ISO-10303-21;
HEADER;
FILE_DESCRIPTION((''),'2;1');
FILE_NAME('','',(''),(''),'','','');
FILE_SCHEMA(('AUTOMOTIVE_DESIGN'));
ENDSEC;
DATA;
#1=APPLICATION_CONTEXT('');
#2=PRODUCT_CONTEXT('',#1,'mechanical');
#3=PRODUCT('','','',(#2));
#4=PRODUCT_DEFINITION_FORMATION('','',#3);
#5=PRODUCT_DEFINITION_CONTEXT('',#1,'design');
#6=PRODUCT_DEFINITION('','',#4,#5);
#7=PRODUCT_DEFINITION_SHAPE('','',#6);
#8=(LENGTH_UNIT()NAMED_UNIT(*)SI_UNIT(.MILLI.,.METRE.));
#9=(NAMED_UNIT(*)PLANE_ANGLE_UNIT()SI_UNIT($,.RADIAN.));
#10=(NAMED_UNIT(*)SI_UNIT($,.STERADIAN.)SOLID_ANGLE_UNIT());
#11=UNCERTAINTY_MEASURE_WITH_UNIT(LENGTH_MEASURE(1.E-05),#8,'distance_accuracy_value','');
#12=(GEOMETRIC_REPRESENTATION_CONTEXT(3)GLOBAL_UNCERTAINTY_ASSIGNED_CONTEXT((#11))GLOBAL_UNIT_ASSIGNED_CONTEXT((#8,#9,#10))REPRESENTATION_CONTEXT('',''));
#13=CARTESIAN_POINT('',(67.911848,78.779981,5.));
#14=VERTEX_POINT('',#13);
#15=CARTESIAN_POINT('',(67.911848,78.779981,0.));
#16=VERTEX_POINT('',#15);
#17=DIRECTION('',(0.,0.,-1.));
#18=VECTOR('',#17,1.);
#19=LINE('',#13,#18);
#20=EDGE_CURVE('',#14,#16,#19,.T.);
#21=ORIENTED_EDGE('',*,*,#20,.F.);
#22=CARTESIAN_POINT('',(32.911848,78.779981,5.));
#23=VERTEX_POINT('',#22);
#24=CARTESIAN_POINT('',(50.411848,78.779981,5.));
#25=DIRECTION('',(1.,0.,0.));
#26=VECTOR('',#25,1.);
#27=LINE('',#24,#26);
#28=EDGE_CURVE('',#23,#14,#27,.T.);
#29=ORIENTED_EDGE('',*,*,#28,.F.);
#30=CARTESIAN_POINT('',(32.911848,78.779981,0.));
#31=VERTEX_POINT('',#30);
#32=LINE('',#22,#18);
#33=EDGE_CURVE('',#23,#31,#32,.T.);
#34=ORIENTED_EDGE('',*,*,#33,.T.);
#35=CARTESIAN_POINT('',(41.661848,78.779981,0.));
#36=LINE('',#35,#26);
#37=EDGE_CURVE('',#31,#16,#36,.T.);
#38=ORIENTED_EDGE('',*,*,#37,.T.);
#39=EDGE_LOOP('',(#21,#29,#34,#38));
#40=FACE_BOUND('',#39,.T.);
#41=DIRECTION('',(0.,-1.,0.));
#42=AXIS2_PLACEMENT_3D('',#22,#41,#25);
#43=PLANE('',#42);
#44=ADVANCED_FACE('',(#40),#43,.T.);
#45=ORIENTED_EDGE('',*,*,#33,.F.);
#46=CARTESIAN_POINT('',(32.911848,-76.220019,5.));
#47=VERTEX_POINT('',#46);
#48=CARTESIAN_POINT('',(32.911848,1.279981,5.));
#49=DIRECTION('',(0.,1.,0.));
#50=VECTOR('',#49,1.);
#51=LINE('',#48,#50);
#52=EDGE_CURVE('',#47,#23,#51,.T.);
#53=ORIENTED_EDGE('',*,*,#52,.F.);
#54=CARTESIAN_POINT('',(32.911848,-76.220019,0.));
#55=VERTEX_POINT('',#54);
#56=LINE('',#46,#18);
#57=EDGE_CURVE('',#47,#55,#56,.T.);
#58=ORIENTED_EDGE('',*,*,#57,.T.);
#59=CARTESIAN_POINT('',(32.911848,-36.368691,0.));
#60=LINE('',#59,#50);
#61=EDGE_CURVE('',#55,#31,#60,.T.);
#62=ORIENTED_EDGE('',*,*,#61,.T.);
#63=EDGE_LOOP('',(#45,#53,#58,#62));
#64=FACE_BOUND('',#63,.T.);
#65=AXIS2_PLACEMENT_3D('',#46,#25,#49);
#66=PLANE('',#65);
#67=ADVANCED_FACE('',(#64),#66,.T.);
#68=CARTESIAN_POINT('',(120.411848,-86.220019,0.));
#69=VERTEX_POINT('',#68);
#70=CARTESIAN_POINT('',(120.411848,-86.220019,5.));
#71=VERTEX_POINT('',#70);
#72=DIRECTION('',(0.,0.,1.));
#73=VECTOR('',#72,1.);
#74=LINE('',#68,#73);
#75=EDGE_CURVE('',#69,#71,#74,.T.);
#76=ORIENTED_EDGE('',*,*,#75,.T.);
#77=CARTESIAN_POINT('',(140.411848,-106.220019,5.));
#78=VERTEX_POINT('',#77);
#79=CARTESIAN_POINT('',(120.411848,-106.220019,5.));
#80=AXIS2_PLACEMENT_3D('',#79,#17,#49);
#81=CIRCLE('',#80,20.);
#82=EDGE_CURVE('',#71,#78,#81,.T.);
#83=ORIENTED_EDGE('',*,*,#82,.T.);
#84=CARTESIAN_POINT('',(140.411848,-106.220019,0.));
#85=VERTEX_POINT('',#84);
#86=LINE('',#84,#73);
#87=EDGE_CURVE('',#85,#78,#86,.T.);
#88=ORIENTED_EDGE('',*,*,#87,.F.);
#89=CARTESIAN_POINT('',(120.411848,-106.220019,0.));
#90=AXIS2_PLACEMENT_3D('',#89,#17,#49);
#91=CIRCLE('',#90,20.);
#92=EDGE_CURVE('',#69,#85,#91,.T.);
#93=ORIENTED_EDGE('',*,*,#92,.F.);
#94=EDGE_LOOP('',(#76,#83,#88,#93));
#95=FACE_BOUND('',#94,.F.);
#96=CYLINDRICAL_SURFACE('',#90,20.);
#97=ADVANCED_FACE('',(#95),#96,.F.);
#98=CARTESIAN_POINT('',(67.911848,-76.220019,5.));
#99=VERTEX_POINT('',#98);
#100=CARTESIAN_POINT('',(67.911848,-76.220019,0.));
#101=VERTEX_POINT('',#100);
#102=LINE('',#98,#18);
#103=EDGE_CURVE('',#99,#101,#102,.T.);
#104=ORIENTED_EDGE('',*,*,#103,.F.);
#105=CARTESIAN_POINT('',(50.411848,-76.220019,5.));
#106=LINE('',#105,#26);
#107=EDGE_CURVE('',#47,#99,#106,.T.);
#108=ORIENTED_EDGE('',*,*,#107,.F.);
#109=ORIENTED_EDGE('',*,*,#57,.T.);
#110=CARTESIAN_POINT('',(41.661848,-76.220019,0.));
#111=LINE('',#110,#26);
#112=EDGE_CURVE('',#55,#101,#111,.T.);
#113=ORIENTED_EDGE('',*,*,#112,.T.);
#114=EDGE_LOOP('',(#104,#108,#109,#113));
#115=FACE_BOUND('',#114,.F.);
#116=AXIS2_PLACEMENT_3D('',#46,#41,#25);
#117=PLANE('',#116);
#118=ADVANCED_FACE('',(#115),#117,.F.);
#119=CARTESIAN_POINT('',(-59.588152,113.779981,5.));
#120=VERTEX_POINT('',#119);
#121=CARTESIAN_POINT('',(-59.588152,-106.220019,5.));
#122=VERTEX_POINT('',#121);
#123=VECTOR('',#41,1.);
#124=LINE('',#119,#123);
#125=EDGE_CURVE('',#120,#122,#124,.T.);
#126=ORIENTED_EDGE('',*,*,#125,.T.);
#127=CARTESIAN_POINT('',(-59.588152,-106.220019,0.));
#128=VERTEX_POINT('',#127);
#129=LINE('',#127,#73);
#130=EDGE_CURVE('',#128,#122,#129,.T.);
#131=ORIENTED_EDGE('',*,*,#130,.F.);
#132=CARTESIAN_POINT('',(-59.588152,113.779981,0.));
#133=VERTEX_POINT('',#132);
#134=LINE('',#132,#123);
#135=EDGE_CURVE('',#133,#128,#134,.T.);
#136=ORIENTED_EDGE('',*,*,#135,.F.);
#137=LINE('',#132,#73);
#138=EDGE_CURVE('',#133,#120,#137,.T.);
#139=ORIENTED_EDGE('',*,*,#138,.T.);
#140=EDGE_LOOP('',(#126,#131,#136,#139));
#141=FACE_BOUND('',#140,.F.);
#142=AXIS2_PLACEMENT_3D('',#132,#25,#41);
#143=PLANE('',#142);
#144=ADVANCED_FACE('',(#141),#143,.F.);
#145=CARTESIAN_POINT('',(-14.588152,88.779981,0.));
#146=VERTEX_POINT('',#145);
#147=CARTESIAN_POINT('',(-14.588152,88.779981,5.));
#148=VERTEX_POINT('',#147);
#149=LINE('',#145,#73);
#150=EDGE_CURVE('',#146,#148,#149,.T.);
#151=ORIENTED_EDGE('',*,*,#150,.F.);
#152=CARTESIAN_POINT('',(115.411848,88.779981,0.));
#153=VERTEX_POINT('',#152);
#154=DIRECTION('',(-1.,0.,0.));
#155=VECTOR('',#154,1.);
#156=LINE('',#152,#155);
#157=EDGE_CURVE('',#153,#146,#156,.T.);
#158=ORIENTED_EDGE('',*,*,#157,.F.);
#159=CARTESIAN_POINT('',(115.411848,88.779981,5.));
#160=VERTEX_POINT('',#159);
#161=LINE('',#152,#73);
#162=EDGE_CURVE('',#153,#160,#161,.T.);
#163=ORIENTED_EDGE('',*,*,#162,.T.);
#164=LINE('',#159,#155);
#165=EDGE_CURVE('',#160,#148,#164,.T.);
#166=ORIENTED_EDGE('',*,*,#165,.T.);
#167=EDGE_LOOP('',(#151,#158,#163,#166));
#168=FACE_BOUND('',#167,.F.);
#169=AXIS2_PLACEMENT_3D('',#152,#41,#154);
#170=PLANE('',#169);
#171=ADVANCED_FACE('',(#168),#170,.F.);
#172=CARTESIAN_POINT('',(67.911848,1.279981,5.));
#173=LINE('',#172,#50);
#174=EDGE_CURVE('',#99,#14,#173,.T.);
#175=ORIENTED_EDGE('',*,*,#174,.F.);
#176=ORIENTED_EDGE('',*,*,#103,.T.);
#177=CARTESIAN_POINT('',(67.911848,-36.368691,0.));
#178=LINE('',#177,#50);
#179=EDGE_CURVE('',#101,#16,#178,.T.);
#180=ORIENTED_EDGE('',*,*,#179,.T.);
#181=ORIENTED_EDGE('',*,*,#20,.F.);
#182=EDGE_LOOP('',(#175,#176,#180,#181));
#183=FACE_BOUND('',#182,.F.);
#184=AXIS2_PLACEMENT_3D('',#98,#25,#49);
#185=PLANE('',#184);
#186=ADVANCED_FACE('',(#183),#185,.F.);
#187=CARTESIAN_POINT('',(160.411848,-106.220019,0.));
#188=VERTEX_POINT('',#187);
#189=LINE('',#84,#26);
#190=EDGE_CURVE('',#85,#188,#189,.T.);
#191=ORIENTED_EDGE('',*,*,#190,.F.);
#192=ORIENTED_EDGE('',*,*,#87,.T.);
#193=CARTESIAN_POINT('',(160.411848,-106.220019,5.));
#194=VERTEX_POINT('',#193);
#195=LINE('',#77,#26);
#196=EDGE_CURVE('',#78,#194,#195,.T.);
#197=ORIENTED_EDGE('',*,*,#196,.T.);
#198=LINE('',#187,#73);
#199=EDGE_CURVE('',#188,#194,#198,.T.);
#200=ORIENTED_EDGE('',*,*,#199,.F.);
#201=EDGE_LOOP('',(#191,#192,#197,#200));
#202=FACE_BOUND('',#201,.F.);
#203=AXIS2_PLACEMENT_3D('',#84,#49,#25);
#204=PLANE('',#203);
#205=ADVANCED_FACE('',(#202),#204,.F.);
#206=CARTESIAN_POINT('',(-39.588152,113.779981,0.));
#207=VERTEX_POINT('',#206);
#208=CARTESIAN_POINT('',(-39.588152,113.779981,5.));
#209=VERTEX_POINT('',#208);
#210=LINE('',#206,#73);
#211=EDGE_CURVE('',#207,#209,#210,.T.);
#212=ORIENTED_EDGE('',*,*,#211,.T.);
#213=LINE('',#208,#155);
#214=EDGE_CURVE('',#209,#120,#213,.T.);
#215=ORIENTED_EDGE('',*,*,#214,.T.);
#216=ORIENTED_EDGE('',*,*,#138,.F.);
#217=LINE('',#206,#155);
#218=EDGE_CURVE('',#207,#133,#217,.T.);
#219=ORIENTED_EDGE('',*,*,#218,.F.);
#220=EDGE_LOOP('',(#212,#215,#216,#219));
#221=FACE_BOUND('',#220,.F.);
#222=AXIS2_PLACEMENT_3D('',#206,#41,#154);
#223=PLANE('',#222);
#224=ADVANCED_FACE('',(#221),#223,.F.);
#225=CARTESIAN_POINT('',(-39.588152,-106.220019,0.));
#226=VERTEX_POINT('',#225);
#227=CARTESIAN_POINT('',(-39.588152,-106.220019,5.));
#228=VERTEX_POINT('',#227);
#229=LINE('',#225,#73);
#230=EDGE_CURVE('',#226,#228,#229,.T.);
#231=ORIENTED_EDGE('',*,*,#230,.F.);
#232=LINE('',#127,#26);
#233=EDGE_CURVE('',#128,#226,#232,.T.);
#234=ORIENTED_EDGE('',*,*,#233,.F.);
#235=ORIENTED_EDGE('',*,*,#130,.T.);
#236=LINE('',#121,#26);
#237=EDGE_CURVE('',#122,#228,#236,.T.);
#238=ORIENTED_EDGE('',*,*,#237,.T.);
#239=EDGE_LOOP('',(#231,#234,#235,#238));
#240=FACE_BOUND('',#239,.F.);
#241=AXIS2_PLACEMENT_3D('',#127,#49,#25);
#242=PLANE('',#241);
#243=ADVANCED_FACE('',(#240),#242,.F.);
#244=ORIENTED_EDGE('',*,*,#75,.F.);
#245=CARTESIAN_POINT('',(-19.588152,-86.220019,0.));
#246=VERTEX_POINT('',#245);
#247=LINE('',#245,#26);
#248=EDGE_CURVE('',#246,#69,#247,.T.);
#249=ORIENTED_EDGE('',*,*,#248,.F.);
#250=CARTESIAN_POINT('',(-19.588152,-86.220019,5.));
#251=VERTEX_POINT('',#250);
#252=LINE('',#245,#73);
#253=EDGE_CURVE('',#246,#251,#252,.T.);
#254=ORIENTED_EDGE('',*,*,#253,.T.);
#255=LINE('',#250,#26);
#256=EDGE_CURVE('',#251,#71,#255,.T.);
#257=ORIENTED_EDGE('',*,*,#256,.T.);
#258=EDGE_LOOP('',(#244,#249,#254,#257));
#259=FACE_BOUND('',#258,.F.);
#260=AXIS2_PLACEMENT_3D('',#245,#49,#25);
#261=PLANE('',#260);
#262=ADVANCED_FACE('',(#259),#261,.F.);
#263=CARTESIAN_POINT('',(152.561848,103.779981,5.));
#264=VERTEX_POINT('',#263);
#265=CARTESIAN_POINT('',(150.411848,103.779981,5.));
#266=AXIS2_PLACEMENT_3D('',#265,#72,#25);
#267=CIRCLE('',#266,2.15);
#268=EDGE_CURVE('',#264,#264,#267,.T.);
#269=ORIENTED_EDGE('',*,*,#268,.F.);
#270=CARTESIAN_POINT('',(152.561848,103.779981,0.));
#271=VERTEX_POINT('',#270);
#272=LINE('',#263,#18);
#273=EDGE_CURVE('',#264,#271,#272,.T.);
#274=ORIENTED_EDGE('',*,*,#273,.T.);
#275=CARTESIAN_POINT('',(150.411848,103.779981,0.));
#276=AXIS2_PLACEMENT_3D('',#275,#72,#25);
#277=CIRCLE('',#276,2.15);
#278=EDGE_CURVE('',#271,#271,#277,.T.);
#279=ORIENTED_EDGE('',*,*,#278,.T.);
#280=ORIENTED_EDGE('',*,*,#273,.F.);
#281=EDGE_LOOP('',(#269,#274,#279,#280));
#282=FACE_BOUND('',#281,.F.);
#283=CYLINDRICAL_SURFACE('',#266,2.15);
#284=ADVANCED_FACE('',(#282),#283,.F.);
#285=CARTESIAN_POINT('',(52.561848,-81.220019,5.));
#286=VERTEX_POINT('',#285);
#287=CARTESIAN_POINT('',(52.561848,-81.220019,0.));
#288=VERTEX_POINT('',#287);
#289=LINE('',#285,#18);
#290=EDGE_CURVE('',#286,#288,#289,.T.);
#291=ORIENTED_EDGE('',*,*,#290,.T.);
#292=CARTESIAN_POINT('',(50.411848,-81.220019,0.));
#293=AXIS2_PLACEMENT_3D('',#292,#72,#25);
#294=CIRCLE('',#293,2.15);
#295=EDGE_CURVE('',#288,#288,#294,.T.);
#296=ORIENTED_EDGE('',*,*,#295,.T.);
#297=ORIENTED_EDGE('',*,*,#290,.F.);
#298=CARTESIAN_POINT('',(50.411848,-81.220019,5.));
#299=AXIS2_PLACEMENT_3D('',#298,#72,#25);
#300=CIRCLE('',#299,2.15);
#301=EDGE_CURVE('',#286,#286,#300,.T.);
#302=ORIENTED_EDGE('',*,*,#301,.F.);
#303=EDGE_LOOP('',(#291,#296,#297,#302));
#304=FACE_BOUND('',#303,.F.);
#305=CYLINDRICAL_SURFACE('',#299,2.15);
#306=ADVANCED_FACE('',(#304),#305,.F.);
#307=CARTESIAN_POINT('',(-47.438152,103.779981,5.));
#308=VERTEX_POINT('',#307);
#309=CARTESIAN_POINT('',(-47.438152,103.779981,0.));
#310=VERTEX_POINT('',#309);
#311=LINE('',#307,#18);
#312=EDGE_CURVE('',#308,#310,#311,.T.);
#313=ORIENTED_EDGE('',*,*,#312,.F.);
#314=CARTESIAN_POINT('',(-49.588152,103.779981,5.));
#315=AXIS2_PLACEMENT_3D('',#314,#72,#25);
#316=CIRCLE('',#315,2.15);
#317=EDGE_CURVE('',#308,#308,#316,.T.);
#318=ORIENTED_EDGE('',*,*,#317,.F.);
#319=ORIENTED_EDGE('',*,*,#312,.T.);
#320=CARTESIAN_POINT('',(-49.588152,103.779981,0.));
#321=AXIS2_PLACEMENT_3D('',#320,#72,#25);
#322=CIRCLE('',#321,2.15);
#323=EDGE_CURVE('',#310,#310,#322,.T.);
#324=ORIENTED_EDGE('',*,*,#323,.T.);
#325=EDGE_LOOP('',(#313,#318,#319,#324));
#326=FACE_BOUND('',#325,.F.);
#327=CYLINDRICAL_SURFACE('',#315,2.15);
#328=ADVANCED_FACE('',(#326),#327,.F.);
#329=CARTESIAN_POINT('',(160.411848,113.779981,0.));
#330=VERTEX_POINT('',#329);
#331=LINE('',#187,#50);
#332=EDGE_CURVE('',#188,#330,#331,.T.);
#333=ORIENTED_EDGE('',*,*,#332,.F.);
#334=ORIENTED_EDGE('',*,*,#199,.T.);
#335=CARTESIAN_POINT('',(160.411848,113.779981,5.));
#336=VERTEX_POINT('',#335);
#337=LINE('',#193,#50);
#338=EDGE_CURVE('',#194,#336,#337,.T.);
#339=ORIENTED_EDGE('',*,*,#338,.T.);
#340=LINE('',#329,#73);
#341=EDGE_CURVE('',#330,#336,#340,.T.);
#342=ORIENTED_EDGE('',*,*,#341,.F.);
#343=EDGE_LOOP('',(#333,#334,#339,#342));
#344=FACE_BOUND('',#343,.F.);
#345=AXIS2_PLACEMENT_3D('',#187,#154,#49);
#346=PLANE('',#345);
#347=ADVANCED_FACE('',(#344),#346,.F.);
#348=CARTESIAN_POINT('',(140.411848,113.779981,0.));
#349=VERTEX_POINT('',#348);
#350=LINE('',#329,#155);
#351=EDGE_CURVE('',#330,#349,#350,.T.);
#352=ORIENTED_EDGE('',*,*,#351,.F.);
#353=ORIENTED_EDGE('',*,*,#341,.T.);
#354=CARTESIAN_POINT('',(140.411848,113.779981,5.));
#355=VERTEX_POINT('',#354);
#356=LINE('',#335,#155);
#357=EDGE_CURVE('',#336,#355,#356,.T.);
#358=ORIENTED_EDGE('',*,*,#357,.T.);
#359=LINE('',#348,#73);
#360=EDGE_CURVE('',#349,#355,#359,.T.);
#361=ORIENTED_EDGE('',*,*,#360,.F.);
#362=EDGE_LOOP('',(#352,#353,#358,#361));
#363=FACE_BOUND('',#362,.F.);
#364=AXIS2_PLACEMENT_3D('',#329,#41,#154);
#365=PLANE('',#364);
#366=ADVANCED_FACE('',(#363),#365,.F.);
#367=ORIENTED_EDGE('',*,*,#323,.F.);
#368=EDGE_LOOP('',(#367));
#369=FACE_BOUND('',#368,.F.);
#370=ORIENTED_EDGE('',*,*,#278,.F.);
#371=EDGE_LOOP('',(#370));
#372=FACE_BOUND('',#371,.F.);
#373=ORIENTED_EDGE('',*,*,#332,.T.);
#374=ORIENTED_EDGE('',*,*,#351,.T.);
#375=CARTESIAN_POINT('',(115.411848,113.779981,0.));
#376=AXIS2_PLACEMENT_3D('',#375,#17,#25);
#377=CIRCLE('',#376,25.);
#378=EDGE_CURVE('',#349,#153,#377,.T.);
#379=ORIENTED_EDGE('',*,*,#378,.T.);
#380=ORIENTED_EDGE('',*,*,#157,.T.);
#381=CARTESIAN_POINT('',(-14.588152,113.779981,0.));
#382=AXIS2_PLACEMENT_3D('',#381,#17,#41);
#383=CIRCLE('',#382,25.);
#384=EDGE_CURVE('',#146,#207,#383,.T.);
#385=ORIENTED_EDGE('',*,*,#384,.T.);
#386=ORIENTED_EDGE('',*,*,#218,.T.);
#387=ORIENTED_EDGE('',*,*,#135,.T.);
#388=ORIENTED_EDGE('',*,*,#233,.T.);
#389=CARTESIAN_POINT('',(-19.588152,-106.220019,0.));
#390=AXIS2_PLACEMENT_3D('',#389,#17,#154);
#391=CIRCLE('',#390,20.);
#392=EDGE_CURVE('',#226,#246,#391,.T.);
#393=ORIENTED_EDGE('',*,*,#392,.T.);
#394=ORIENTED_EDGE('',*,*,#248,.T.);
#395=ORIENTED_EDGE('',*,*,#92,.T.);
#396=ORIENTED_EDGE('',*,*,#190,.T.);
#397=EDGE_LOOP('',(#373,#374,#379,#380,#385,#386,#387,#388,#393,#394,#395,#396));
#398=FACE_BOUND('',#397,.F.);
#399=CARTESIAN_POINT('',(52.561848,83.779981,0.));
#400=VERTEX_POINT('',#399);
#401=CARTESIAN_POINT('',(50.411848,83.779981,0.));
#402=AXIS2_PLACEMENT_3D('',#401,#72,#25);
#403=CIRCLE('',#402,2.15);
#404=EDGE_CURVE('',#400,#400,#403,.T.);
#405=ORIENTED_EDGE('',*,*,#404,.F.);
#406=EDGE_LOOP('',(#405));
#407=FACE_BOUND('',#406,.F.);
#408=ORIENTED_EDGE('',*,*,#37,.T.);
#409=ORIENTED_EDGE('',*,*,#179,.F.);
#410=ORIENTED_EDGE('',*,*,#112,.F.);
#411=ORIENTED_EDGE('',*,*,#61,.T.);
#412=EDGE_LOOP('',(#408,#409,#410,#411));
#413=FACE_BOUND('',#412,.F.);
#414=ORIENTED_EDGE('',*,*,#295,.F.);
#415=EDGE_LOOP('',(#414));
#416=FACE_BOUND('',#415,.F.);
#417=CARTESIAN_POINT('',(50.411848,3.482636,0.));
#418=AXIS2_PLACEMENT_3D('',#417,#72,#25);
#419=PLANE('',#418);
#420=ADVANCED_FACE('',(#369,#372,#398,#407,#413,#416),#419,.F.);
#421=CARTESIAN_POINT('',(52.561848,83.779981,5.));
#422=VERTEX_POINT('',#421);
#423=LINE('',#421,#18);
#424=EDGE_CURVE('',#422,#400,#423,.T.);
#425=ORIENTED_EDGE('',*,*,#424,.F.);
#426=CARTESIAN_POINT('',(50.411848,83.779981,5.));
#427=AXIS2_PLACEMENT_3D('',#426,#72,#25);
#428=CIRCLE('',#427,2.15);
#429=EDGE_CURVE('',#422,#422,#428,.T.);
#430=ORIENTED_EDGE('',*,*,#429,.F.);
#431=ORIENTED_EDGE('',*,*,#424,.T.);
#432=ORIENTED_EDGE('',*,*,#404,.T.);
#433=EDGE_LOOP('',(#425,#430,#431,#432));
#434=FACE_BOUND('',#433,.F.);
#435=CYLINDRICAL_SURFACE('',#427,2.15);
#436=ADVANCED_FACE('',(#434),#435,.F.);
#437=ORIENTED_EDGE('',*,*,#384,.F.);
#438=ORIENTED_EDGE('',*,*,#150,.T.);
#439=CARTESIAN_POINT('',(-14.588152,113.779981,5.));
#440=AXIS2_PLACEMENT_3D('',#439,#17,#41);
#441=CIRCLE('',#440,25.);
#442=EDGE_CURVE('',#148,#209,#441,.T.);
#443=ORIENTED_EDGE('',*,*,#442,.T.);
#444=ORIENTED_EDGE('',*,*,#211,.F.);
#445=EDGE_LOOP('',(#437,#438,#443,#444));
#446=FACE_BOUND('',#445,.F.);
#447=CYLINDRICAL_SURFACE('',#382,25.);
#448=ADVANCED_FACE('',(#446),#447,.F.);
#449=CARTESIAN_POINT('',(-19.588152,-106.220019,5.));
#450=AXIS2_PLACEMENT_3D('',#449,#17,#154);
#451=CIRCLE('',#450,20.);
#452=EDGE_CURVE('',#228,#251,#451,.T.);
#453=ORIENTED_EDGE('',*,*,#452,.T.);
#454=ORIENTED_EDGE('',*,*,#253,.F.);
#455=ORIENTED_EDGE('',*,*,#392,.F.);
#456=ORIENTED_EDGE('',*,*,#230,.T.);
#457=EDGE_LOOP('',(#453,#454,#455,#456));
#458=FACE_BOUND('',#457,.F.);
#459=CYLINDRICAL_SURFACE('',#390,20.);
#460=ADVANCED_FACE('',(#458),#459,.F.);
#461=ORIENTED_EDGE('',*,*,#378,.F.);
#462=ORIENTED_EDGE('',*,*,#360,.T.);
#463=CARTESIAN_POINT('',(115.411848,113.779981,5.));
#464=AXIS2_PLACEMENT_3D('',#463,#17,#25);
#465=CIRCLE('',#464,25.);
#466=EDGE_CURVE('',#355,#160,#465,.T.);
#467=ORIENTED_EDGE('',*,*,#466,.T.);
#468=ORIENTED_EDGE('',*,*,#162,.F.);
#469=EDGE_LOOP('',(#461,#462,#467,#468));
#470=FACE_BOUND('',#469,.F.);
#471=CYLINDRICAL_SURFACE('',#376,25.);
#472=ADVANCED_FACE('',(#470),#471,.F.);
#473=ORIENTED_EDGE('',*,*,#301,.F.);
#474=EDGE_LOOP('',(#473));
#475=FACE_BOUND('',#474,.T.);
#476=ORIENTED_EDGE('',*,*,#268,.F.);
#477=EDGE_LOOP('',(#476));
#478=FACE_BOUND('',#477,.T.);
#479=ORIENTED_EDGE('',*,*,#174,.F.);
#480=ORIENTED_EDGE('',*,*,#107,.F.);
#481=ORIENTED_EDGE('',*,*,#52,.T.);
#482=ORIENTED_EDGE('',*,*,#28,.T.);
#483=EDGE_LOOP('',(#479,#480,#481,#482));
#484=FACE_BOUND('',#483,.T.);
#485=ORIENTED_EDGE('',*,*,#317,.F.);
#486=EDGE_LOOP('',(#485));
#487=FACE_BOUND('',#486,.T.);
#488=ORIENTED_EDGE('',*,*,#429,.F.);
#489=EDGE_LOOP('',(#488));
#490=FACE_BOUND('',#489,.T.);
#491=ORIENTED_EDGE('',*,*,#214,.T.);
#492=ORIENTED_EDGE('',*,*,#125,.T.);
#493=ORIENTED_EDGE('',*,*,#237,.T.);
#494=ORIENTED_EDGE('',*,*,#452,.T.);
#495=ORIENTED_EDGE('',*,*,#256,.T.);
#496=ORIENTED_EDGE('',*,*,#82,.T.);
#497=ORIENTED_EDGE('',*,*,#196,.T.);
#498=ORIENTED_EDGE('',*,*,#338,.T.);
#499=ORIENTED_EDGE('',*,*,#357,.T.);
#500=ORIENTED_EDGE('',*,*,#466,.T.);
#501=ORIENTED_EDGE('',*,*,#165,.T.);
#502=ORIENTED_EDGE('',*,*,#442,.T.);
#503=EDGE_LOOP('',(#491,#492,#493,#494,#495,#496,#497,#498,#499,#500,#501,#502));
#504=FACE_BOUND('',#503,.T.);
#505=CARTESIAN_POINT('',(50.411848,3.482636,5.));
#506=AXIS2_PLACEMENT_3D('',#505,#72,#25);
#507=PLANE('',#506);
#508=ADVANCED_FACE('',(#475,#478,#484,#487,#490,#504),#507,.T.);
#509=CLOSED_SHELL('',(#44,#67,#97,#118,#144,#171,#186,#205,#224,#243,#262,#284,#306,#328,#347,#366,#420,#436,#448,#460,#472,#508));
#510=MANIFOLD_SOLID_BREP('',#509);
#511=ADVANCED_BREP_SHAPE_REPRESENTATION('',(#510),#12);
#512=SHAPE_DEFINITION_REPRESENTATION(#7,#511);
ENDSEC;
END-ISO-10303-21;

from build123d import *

# Parameters (mm, degrees)
F1_DEPTH = 5
F2_W     = 35
F2_H     = 155
F3_DEPTH = 5.001
F4_R     = 2.15
F5_DEPTH = 5.001


# Not quite as in the source:
# - a feature names something its author has since deleted; it is built from what else it names


with BuildPart() as f1:
    # F0 (on Top) → F1 (new body)
    with BuildSketch(Plane.XY):
        with BuildLine():
            Line((-39.5881515363, 113.7799814343), (-59.5881515363, 113.7799814343))
            Line((-59.5881515363, 113.7799814343), (-59.5881515363, -106.2200185657))
            Line((-59.5881515363, -106.2200185657), (-39.5881515363, -106.2200185657))
            ThreePointArc((-39.5881515363, -106.2200185657), (-33.7302871601, -92.0778829419), (-19.5881515363, -86.2200185657))
            Line((-19.5881515363, -86.2200185657), (120.4118484637, -86.2200185657))
            ThreePointArc((120.4118484637, -86.2200185657), (134.5539840874, -92.0778829419), (140.4118484637, -106.2200185657))
            Line((140.4118484637, -106.2200185657), (160.4118484637, -106.2200185657))
            Line((160.4118484637, -106.2200185657), (160.4118484637, 113.7799814343))
            Line((160.4118484637, 113.7799814343), (140.4118484637, 113.7799814343))
            ThreePointArc((140.4118484637, 113.7799814343), (133.0895179933, 96.1023119047), (115.4118484637, 88.7799814343))
            Line((115.4118484637, 88.7799814343), (-14.5881515363, 88.7799814343))
            ThreePointArc((-14.5881515363, 88.7799814343), (-32.265821066, 96.1023119047), (-39.5881515363, 113.7799814343))
        make_face()
    extrude(amount=F1_DEPTH)

    # F2 (on face) → F3 (cut, through all)
    with BuildSketch(Plane.XY.offset(5)):
        with Locations((50.4118484637, 1.2799814343)):
            Rectangle(F2_W, F2_H)
    extrude(amount=-F3_DEPTH, mode=Mode.SUBTRACT)

    # F4 (on face) → F5 (cut, through all)
    with BuildSketch(Plane.XY.offset(5)):
        with Locations((-49.5881515363, 103.7799814343)):
            Circle(F4_R)
        with Locations((150.4118484637, 103.7799814343)):
            Circle(F4_R)
        with Locations((50.4118484637, 83.7799814343)):
            Circle(F4_R)
        with Locations((50.4118484637, -81.2200185657)):
            Circle(F4_R)
    extrude(amount=-F5_DEPTH, mode=Mode.SUBTRACT)


solid = f1.part
